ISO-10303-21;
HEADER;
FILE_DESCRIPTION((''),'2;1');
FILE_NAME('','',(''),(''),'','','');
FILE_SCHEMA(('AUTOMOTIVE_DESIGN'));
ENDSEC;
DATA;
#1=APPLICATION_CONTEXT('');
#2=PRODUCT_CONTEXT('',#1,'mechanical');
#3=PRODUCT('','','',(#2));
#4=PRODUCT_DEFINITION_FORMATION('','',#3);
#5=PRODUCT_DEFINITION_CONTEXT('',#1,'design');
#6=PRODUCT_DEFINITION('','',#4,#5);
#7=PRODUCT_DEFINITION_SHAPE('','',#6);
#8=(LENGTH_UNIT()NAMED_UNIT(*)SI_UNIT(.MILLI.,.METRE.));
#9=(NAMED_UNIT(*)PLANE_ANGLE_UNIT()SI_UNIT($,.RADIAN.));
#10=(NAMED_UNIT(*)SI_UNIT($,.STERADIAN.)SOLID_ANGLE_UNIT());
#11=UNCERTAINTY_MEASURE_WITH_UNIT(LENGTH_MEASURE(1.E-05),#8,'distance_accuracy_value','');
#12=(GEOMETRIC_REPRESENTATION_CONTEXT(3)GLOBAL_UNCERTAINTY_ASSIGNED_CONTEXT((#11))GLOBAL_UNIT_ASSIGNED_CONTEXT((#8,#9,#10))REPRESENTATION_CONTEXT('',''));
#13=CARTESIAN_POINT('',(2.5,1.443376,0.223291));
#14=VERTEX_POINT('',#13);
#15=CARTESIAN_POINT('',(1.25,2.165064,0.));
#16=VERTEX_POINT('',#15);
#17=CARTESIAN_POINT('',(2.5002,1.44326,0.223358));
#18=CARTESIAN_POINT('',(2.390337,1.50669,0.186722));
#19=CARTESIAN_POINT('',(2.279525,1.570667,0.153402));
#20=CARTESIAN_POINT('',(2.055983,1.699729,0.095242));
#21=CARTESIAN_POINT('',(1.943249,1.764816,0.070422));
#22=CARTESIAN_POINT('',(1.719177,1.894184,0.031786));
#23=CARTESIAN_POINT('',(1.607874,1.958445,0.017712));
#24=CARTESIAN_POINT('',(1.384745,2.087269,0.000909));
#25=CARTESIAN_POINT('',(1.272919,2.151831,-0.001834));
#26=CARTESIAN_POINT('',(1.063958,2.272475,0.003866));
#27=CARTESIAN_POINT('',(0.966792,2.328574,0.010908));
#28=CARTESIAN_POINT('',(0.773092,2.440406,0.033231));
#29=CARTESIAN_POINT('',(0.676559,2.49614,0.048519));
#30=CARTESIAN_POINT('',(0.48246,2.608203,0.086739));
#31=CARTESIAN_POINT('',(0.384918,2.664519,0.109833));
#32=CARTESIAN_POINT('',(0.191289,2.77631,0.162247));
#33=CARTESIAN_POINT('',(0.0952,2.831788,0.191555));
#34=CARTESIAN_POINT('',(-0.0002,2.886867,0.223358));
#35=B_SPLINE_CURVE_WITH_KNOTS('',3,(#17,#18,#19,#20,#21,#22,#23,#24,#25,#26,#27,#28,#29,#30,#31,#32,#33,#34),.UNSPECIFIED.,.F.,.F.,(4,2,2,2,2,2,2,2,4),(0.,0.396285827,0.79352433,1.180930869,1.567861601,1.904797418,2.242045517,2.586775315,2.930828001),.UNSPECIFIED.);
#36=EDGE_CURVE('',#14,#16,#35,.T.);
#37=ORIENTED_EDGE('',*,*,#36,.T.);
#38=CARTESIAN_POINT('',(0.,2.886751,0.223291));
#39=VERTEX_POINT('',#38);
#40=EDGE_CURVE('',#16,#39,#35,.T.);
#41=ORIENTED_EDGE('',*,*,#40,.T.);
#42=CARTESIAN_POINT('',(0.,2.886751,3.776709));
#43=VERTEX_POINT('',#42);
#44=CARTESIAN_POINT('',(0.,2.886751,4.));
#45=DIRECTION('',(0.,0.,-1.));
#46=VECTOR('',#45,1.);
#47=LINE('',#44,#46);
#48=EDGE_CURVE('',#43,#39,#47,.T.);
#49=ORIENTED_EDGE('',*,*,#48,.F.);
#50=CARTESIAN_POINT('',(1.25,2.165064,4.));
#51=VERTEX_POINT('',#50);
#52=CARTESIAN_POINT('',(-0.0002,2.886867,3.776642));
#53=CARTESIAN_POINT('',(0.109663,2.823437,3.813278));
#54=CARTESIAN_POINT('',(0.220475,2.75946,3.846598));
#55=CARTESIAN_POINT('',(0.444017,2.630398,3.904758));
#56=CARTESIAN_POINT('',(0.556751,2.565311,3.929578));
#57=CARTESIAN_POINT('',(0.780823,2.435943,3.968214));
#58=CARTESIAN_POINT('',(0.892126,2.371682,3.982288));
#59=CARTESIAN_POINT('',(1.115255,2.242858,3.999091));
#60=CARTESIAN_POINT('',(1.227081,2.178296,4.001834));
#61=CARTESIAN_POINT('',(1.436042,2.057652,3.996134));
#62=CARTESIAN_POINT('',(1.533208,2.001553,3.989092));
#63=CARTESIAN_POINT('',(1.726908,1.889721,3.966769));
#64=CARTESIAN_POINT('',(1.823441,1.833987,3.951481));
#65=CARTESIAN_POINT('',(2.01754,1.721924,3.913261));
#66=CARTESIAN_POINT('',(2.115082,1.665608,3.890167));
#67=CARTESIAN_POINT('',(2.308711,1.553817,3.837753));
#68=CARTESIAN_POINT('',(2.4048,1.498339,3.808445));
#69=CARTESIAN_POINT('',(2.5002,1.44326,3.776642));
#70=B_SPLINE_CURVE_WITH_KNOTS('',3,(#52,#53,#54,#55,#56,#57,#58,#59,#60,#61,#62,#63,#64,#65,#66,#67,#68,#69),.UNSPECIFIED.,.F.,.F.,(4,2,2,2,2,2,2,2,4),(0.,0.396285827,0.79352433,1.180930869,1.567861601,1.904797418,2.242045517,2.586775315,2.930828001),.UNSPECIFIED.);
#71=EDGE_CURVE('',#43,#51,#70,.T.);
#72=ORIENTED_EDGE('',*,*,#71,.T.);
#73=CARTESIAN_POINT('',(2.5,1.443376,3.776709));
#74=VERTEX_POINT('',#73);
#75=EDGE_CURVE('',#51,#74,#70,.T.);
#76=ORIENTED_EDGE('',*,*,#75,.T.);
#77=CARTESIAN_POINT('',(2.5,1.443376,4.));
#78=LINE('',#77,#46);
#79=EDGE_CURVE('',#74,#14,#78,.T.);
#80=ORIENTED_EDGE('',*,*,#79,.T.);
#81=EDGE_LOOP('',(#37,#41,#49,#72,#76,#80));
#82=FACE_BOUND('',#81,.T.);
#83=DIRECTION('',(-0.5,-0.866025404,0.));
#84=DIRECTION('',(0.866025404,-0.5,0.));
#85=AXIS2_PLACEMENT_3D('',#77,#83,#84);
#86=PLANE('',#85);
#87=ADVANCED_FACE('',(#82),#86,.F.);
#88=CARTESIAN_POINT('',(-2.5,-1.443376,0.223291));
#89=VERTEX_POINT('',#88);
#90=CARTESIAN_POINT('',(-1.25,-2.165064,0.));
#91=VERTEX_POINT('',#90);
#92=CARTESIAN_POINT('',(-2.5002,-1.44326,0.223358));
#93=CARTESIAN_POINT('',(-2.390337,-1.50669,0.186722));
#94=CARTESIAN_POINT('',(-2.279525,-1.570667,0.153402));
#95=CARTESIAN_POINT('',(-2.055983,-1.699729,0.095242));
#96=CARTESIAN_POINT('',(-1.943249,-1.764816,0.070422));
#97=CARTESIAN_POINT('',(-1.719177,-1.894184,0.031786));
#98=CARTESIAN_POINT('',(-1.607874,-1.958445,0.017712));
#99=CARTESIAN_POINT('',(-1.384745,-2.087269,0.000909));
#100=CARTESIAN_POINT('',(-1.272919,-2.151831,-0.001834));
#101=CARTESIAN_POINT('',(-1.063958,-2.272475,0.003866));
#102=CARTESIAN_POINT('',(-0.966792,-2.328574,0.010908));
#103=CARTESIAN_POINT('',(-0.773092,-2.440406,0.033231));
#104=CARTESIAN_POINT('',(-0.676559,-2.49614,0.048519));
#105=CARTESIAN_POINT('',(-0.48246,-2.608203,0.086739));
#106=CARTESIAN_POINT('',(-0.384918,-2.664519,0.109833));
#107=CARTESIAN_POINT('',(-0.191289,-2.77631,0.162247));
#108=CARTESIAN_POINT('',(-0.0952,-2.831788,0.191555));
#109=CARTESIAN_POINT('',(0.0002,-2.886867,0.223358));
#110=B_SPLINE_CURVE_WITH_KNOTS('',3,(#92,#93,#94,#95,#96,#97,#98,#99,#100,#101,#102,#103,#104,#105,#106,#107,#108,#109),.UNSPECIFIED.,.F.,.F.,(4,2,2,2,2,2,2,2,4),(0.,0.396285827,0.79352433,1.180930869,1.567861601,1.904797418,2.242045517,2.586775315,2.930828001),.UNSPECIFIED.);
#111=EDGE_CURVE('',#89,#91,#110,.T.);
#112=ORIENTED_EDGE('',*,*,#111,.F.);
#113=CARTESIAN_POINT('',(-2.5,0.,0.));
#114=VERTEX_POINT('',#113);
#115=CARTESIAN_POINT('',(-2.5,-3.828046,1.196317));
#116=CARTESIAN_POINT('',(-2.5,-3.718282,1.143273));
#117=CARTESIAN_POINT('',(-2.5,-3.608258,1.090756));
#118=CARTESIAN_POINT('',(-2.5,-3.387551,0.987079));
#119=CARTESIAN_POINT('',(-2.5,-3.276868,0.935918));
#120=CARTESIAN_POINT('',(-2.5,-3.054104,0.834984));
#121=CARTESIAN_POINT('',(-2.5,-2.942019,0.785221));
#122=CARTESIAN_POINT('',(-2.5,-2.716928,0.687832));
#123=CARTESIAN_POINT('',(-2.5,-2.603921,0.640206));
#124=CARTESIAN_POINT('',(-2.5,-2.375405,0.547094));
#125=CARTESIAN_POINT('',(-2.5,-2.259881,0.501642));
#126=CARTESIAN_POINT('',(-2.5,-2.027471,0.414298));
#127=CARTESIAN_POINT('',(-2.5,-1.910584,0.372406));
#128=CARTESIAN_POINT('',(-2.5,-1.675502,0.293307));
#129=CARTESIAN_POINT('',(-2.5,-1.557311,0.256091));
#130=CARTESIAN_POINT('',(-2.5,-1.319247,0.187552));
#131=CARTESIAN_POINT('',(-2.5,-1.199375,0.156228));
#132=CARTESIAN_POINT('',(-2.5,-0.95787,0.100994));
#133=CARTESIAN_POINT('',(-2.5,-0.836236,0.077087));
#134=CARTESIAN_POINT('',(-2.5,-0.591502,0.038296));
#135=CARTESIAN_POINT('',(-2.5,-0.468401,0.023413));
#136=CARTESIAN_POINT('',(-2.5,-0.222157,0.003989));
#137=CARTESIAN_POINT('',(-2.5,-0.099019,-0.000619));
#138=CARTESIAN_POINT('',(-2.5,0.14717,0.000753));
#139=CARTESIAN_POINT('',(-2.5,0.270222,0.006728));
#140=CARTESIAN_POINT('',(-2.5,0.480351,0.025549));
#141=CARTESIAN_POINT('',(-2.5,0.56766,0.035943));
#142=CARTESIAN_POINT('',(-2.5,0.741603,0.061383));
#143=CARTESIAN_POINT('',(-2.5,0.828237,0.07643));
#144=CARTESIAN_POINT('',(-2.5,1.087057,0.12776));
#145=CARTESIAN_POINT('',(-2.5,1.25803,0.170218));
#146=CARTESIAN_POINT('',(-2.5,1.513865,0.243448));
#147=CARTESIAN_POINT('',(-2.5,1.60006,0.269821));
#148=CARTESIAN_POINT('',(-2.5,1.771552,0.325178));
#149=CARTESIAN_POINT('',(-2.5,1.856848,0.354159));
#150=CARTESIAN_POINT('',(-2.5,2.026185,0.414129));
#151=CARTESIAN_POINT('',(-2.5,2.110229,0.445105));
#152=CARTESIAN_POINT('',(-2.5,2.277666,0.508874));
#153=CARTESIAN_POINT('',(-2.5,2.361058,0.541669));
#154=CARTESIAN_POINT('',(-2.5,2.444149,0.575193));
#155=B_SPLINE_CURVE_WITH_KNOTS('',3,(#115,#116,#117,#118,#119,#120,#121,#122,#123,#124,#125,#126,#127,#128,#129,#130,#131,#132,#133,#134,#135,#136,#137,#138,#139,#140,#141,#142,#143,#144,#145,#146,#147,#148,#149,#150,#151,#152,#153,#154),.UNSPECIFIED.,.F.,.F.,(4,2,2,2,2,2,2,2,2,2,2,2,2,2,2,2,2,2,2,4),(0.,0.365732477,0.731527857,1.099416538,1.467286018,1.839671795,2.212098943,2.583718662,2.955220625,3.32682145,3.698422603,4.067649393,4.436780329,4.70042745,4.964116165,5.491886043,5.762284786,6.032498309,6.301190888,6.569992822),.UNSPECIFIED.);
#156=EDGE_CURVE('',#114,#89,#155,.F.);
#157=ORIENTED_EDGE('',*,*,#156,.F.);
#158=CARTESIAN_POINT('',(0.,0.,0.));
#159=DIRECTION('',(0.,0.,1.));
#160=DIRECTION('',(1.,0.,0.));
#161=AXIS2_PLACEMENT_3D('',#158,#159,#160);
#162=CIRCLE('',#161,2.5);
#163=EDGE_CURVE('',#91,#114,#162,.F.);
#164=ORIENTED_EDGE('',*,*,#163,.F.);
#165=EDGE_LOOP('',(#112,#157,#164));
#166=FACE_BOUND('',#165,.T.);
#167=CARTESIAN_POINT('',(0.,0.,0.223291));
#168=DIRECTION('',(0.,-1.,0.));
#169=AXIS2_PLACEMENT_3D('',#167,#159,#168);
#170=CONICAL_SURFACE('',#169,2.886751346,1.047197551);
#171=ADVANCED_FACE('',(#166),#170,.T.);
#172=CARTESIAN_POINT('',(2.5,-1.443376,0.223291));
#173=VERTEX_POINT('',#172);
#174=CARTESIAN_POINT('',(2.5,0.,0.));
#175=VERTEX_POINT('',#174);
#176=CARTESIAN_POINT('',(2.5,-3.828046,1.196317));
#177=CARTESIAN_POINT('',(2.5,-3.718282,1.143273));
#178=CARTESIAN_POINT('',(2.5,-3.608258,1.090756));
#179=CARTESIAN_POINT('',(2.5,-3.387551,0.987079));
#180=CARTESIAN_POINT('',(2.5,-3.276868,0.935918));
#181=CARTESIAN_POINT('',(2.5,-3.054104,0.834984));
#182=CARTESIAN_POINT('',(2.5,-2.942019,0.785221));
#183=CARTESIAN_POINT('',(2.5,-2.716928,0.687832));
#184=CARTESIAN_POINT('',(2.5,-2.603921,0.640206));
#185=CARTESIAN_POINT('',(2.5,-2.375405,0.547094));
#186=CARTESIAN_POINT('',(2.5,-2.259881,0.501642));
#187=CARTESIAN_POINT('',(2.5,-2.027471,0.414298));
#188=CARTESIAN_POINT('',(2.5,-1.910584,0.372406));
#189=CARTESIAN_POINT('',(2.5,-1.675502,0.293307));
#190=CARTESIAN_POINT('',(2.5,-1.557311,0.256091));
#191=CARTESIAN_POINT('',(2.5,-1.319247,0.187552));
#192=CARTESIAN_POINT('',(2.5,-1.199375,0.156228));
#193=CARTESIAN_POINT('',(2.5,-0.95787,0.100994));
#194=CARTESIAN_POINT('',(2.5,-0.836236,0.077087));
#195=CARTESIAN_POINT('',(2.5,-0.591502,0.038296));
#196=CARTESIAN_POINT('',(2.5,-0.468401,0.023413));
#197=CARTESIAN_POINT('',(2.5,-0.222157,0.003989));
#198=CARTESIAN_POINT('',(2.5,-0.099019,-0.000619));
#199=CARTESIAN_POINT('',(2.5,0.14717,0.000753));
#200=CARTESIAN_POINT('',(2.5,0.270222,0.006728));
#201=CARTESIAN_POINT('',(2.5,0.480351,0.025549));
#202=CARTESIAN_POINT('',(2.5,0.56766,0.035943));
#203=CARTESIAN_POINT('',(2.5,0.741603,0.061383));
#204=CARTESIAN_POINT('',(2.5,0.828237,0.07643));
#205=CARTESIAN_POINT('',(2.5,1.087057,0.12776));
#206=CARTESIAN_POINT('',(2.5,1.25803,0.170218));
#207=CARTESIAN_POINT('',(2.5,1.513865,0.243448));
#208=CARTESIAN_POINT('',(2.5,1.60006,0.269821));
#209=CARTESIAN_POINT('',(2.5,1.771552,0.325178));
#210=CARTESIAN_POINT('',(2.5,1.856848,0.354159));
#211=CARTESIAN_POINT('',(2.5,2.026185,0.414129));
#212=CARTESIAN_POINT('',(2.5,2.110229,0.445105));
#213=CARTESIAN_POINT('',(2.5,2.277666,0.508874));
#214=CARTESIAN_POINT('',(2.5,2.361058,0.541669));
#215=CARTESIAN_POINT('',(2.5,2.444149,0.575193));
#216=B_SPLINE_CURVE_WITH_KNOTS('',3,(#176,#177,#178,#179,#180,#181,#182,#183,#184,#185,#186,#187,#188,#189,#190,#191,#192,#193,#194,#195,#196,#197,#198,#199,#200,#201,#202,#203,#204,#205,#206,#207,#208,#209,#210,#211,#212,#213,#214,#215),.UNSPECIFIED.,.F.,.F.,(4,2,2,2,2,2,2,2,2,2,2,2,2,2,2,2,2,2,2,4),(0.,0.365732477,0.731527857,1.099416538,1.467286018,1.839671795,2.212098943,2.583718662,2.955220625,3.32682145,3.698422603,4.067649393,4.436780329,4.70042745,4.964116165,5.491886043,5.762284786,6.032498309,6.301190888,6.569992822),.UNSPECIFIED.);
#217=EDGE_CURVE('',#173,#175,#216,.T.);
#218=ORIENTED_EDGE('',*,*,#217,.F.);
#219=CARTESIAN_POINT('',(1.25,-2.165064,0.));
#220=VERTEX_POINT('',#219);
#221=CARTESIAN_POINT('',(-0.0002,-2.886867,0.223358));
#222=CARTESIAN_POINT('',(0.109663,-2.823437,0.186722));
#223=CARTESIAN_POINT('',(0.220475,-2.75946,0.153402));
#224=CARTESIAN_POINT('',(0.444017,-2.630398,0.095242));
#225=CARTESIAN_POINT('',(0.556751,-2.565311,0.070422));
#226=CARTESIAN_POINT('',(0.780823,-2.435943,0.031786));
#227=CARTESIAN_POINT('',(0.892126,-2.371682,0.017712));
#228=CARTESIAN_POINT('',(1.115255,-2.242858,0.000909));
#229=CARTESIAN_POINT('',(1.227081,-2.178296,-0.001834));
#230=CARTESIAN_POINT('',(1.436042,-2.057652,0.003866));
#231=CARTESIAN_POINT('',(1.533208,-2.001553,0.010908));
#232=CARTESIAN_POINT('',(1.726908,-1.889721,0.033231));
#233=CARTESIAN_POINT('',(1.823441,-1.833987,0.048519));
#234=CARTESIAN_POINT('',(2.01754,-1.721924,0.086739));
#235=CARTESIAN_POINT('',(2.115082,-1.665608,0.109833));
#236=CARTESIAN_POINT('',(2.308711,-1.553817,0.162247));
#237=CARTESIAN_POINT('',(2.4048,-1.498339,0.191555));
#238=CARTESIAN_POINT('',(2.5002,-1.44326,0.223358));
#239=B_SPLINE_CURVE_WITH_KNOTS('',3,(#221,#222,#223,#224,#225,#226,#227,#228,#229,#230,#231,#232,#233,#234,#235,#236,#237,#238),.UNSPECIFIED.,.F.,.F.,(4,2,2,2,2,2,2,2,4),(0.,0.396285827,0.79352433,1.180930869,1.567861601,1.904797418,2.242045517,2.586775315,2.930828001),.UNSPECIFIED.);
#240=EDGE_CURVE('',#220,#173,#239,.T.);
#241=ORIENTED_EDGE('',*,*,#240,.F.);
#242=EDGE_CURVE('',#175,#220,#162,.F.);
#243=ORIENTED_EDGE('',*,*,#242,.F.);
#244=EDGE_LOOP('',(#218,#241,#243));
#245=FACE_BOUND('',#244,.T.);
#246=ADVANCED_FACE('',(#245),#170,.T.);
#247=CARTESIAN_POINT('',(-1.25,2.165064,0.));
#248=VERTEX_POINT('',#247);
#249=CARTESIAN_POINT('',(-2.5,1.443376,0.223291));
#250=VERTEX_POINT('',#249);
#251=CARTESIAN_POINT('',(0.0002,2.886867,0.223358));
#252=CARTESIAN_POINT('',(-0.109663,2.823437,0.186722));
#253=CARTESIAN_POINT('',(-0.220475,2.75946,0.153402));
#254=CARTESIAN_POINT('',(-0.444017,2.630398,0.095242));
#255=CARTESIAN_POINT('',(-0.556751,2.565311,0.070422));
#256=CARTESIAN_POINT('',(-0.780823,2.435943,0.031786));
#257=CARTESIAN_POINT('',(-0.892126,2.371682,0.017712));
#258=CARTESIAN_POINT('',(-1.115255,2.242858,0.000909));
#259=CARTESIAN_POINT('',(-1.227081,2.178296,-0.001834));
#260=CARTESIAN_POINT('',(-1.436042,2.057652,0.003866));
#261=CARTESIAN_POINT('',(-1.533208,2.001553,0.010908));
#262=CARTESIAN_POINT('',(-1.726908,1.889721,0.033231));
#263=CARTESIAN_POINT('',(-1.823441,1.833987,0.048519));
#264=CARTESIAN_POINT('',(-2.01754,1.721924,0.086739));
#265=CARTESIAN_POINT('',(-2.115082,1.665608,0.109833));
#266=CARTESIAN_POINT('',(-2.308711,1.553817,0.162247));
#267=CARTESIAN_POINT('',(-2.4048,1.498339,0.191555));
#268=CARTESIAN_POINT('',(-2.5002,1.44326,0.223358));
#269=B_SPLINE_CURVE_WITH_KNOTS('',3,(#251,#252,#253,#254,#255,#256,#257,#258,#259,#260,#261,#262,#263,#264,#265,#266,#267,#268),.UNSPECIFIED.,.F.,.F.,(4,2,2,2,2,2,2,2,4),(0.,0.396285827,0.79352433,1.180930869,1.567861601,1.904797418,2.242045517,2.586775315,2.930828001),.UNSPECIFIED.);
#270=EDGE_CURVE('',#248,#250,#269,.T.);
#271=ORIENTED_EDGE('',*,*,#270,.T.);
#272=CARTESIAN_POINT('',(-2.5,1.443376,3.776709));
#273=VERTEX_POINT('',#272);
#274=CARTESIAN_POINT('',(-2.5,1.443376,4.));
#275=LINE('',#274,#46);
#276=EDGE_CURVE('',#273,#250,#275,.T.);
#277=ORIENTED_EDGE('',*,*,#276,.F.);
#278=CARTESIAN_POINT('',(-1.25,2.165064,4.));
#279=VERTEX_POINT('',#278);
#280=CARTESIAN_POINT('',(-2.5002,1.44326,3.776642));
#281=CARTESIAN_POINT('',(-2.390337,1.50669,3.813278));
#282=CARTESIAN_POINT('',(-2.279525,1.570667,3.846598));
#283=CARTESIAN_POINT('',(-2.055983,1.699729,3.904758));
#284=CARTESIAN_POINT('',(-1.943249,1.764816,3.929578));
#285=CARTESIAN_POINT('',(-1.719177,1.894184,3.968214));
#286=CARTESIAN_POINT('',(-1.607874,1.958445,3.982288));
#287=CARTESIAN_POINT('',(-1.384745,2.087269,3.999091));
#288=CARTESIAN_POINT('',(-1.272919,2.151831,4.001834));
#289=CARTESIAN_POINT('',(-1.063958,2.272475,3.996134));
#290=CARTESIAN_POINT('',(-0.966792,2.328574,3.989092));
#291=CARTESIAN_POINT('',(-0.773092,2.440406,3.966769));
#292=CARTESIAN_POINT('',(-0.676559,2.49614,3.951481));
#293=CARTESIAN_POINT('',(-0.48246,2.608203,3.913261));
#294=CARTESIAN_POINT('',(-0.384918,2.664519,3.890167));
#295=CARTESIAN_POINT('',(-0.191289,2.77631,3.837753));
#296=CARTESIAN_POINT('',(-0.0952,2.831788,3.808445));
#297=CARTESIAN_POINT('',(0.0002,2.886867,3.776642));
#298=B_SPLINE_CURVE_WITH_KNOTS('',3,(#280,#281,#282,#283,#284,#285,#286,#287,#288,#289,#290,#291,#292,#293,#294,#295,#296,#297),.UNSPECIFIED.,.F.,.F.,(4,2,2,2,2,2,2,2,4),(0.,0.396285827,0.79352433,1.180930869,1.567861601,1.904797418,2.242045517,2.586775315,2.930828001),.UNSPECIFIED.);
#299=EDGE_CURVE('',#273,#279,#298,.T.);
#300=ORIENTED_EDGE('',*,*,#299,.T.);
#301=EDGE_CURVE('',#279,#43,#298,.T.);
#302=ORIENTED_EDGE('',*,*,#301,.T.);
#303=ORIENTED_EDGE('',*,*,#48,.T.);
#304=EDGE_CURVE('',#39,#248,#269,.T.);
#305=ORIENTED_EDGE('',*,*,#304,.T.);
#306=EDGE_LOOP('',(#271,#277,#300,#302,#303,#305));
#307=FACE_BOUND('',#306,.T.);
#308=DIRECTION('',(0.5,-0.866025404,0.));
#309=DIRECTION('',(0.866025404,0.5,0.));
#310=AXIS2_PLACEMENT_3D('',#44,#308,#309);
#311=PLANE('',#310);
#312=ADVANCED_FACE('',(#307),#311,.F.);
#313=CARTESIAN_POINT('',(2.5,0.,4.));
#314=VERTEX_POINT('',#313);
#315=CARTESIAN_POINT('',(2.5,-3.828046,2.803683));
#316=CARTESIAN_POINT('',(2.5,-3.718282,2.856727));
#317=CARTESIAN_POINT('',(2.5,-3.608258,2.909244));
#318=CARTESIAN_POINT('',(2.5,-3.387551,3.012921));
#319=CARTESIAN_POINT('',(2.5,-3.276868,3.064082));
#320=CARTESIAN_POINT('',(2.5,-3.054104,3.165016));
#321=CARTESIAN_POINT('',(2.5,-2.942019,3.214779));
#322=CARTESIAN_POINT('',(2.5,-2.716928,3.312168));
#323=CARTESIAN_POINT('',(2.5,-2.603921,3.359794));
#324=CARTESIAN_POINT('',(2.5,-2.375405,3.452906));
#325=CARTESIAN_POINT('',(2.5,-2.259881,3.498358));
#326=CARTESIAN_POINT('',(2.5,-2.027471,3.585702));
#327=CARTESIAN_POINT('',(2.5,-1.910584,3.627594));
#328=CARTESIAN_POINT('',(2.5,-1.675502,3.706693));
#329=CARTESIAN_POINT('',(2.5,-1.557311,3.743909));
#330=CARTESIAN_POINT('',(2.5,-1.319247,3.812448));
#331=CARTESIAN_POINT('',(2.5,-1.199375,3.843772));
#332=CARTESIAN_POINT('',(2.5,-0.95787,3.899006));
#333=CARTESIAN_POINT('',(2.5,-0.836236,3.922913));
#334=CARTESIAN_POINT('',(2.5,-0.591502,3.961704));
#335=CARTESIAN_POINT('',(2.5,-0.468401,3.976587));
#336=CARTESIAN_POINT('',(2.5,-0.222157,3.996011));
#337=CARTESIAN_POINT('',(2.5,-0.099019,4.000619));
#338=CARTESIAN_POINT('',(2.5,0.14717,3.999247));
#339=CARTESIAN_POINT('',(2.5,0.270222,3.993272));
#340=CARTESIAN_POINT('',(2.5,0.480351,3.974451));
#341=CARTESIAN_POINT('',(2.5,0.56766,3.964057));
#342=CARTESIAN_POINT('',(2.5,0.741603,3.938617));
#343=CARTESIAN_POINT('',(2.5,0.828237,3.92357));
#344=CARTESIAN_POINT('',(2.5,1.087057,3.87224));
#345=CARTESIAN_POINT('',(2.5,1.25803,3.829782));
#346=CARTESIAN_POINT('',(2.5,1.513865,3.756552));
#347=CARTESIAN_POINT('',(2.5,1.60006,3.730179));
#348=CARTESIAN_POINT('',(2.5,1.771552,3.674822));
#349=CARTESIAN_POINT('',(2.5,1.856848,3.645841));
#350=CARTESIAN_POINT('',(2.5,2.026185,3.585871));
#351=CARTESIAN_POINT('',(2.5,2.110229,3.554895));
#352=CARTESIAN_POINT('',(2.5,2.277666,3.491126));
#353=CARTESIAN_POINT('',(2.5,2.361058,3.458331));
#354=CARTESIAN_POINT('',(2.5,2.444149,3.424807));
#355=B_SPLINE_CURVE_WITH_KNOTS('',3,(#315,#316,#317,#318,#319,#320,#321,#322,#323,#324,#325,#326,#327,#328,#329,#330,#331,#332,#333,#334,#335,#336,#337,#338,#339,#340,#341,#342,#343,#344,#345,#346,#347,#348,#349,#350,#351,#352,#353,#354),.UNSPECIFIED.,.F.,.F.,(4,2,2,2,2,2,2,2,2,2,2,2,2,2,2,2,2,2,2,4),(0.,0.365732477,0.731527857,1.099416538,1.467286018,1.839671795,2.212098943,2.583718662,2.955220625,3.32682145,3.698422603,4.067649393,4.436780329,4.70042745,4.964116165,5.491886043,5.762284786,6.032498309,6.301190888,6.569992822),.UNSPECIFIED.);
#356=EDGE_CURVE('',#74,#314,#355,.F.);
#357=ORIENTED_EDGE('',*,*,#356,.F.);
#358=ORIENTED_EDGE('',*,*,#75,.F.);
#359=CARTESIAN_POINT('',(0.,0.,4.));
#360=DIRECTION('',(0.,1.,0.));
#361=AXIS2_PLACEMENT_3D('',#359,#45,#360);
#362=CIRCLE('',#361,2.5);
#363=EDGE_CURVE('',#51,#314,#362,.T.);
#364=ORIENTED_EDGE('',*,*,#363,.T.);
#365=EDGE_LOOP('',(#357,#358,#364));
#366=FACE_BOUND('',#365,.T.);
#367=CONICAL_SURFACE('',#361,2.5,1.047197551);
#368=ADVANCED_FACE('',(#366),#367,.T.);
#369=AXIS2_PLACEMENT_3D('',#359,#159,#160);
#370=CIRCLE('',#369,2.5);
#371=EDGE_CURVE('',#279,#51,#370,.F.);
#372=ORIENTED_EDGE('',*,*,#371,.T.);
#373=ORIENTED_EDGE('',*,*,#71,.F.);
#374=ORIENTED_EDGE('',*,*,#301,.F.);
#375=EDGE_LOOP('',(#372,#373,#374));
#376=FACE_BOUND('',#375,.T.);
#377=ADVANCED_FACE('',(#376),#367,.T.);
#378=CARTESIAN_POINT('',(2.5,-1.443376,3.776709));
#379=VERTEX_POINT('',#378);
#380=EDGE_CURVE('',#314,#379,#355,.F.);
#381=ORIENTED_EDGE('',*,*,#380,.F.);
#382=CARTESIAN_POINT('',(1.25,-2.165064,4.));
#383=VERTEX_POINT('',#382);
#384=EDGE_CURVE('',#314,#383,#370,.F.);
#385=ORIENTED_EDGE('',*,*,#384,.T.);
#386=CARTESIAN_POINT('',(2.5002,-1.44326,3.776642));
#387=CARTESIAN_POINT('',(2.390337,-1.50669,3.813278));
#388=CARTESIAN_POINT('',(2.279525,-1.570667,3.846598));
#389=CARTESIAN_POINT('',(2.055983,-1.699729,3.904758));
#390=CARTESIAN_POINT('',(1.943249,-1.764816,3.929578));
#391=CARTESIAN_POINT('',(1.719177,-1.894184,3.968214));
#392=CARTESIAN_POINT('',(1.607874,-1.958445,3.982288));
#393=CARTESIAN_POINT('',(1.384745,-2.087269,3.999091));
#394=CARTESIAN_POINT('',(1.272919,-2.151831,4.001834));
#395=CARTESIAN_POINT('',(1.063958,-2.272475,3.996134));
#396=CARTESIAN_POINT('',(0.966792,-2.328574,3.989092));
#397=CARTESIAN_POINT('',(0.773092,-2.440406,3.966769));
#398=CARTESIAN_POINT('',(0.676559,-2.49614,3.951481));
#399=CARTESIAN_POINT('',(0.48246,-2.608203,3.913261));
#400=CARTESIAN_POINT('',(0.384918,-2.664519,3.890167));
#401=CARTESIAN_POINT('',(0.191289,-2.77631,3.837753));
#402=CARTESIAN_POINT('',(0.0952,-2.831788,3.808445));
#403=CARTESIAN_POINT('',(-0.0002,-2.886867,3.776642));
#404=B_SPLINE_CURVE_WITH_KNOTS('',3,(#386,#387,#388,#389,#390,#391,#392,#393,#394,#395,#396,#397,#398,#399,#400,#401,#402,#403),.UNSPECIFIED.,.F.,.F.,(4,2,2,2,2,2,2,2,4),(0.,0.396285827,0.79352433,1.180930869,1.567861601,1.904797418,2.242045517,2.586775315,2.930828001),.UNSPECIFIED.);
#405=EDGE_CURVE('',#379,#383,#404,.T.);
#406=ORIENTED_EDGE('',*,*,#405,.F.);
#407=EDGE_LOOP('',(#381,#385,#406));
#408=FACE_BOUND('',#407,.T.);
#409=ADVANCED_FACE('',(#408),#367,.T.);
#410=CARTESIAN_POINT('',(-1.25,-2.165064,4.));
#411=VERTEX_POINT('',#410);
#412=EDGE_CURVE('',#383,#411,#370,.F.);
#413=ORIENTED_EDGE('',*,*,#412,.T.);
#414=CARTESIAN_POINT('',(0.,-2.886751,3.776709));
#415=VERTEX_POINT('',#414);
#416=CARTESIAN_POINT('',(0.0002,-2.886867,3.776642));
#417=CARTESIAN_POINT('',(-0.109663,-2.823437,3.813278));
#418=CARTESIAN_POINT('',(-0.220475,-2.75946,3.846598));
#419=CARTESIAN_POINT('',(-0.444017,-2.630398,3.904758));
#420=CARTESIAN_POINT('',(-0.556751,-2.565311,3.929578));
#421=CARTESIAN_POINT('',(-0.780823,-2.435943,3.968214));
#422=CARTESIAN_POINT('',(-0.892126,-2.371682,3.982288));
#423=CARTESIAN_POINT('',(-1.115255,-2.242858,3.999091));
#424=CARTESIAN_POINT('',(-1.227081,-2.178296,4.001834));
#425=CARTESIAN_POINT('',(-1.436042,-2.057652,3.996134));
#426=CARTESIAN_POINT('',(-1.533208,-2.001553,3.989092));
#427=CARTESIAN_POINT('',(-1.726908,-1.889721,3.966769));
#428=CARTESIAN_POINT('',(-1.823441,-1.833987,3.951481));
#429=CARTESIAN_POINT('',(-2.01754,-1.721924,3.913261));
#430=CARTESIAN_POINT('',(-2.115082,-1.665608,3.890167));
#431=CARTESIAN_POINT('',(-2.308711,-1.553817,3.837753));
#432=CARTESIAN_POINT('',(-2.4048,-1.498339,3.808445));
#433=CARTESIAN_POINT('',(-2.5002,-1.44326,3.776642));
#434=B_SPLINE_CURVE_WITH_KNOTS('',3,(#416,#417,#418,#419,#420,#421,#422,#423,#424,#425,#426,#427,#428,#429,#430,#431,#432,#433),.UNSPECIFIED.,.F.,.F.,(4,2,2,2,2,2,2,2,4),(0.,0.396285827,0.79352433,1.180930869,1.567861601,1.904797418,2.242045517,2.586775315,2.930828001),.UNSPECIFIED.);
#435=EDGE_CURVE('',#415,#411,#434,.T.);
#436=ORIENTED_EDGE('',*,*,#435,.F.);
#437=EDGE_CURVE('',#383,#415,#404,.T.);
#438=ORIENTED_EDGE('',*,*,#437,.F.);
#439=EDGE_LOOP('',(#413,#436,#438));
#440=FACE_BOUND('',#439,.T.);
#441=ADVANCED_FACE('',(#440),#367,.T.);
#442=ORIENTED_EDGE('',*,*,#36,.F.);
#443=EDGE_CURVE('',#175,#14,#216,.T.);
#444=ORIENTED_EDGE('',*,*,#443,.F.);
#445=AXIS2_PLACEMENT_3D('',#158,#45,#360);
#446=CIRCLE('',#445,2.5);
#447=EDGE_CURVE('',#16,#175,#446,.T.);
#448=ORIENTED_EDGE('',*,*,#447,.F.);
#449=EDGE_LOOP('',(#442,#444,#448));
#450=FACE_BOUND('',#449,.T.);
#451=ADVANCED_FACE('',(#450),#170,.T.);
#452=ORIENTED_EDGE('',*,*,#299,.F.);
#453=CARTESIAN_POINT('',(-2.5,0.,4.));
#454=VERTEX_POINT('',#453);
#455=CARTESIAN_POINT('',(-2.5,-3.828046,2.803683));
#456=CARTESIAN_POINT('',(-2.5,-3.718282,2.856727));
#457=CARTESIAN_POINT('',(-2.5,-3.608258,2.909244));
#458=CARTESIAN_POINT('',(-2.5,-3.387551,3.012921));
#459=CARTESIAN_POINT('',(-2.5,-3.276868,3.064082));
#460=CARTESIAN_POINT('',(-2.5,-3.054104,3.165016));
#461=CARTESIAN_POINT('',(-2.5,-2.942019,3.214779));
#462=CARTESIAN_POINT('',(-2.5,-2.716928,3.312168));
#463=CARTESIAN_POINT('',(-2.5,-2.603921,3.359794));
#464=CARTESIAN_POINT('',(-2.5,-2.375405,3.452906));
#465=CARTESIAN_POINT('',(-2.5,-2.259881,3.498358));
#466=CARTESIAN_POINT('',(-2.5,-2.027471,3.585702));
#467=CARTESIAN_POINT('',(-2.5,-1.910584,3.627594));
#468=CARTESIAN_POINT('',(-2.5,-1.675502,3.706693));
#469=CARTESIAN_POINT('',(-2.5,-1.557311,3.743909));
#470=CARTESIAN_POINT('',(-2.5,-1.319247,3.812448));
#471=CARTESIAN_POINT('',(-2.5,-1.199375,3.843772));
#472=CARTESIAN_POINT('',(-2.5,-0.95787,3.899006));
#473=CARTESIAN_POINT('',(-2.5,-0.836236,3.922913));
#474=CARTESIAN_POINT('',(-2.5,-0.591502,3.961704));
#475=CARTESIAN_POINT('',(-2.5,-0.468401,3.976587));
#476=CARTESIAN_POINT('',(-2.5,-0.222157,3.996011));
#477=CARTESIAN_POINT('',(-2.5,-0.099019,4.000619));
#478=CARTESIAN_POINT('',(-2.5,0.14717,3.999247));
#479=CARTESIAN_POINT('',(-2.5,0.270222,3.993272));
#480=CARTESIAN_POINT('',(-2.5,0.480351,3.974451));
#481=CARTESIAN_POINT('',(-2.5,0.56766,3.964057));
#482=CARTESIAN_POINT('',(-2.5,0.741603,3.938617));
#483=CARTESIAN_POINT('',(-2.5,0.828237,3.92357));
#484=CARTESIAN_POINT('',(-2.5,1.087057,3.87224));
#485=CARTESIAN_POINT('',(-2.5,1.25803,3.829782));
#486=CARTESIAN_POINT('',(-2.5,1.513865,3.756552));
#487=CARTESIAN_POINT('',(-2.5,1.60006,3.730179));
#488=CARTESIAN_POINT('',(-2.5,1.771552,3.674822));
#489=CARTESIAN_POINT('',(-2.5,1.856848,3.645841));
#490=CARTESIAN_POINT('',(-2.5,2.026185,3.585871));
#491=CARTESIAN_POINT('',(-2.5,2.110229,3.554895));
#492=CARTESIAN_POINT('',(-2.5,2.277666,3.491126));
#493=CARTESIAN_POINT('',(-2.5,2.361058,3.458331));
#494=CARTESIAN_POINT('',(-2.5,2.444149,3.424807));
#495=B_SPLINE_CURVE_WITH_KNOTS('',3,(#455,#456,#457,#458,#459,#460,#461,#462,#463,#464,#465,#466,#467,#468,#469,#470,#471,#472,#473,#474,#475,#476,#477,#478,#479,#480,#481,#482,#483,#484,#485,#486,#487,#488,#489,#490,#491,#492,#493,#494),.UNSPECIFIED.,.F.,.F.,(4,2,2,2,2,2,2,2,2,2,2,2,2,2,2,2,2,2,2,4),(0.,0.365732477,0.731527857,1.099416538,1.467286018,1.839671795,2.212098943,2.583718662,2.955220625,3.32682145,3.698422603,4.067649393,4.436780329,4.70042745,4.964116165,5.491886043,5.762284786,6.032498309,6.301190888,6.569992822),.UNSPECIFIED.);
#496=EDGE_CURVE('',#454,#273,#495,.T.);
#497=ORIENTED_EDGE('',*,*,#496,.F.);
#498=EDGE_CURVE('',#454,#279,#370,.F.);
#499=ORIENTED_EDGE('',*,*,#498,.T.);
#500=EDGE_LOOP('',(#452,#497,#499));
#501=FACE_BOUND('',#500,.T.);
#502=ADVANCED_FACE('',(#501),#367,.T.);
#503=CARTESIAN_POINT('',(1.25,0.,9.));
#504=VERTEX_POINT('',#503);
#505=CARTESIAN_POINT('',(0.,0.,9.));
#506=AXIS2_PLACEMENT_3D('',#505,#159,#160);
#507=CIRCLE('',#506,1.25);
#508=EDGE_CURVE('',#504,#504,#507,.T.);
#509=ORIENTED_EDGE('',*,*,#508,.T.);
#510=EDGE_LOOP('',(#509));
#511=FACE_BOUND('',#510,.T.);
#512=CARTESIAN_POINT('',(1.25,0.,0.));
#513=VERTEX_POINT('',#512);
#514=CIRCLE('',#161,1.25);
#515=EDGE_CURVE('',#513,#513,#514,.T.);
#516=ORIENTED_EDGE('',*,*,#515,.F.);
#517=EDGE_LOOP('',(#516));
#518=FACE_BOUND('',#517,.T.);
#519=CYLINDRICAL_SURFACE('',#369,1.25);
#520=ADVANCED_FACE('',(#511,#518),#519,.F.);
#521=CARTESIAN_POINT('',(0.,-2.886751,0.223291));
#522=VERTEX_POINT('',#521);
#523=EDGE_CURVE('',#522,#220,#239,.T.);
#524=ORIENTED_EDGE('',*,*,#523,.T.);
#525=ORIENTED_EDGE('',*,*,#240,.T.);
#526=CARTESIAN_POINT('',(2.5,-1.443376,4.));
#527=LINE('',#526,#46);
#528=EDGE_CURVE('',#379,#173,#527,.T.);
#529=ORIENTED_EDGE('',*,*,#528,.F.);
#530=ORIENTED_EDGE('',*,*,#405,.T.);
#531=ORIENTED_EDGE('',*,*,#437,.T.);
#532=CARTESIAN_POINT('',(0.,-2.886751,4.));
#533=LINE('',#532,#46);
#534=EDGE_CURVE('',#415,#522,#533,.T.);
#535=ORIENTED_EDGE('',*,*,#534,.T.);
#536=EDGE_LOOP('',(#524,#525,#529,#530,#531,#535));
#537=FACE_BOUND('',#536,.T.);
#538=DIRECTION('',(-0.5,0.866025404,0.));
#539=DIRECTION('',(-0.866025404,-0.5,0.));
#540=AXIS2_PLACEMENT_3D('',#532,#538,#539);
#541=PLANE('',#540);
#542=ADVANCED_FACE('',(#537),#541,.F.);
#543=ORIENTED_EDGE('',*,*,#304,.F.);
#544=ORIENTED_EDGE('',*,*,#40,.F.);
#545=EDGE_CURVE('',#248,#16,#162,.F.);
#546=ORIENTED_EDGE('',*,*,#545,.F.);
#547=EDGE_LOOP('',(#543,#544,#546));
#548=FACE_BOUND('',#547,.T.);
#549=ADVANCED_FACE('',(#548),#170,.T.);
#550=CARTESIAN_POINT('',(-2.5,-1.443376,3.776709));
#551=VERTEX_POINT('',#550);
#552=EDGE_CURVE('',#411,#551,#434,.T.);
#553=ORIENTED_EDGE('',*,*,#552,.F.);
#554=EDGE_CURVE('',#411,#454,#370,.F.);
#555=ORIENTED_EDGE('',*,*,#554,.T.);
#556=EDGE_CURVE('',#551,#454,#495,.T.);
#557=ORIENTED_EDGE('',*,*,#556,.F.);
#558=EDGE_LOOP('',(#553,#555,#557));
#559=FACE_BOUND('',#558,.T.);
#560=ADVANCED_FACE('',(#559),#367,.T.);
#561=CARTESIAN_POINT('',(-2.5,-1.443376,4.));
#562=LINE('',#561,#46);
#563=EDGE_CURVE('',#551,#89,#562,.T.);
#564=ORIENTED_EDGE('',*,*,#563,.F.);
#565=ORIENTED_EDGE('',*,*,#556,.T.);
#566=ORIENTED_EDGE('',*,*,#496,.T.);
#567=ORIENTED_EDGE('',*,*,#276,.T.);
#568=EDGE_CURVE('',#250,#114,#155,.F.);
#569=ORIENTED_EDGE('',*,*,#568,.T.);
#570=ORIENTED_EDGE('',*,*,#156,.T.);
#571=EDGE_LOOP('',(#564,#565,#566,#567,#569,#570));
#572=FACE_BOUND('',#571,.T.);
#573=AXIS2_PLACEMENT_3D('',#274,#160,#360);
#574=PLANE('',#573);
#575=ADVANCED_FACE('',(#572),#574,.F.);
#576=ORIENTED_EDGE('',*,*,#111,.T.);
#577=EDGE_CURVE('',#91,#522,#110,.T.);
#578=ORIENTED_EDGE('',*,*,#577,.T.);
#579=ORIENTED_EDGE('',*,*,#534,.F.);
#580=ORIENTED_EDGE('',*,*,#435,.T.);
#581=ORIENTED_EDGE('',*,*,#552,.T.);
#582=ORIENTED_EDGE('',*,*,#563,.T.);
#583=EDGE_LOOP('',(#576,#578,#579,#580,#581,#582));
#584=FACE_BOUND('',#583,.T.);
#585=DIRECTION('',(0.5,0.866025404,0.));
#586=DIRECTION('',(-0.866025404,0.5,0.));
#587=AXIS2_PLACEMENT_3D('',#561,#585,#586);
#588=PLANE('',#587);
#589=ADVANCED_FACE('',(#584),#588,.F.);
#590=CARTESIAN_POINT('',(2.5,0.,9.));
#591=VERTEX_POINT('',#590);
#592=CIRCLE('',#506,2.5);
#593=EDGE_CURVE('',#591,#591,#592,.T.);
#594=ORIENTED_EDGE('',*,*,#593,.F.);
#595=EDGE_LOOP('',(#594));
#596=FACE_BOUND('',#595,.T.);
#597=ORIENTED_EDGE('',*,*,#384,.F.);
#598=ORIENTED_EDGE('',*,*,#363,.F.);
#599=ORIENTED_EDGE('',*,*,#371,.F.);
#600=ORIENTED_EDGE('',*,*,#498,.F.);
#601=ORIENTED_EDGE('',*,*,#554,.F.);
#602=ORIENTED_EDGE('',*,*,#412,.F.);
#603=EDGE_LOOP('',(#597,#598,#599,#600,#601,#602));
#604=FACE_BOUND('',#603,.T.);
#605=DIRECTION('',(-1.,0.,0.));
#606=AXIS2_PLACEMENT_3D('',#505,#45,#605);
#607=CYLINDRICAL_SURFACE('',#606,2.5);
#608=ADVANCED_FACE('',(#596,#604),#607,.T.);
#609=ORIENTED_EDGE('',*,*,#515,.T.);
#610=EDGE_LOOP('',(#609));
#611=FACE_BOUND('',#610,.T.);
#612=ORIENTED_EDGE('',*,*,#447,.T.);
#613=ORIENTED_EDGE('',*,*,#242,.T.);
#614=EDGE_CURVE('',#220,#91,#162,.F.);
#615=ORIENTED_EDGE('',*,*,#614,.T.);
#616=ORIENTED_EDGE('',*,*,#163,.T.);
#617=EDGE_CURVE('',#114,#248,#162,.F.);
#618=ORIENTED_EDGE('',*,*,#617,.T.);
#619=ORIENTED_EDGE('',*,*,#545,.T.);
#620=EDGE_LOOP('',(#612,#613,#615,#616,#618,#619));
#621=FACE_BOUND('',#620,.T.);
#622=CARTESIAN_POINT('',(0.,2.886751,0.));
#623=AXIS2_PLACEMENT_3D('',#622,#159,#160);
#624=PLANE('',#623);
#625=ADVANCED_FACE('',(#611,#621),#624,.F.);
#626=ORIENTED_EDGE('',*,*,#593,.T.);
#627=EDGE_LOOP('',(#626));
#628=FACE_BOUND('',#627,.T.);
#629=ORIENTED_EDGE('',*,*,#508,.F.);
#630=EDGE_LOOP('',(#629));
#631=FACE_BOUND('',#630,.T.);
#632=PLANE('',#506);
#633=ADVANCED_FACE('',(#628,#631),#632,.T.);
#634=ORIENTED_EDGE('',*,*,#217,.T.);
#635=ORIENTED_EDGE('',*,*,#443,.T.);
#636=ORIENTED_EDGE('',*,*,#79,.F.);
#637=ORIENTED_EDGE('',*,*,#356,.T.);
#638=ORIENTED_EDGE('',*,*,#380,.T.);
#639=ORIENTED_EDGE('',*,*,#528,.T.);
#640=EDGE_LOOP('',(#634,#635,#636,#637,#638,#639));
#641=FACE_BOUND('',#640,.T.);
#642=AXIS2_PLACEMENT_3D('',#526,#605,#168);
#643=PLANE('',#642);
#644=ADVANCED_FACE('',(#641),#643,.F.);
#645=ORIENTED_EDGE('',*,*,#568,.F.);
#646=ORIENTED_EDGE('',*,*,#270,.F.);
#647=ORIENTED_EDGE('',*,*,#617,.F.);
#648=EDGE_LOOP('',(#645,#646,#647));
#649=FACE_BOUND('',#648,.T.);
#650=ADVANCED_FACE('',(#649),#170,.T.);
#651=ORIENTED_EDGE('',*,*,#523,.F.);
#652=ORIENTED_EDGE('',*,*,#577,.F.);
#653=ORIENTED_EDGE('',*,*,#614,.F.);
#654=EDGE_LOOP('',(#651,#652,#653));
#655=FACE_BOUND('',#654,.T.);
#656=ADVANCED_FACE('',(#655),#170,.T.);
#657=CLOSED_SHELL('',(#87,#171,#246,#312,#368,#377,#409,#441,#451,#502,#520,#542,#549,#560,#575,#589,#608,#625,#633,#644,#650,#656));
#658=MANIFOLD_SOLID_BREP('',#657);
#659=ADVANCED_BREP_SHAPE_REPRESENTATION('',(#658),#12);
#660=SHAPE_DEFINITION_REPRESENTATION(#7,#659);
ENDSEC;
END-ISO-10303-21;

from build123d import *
from build123d.topology import SkipClean

# Parameters (mm, degrees)
BOSS_EXTRUDE1_DEPTH       = 4
M3X0_5_TAPPED_HOLE1_D     = 2.5
M3X0_5_TAPPED_HOLE1_DEPTH = 7.5
M3X0_5_TAPPED_HOLE1_TIP   = 0.751075774
SKETCH5_R                 = 1.25
BOSS_EXTRUDE2_DEPTH       = 5


with BuildPart() as part:
    # Sketch1 → Boss-Extrude1 (new body)
    with BuildSketch(Plane.XY):
        Polygon((0, 2.886751346), (-2.5, 1.443375673), (-2.5, -1.443375673), (0, -2.886751346), (2.5, -1.443375673), (2.5, 1.443375673), align=None)
    extrude(amount=BOSS_EXTRUDE1_DEPTH)

    # M3x0.5 Tapped Hole1
    with Locations(Plane.XY.offset(4)):
        with Locations((0, 0)):
            Hole(M3X0_5_TAPPED_HOLE1_D / 2, depth=M3X0_5_TAPPED_HOLE1_DEPTH)
            with Locations((0, 0, -(M3X0_5_TAPPED_HOLE1_DEPTH + M3X0_5_TAPPED_HOLE1_TIP / 2))):  # 118° drill point
                Cone(0, M3X0_5_TAPPED_HOLE1_D / 2, M3X0_5_TAPPED_HOLE1_TIP, mode=Mode.SUBTRACT)

    # Sketch4 → Cut-Revolve1 (revolve, cut)
    with BuildSketch(Plane(origin=(0, 0, 0), x_dir=(0, 0, -1), z_dir=(1, 0, 0))):
        Polygon((-3.776709006, 2.886751346), (-4, 2.5), (-4, 2.886751346), align=None)
        Polygon((0, 2.886751346), (-0.223290994, 2.886751346), (0, 2.5), align=None)
    revolve(axis=Axis((0, 0, 0), (0, 0, 1)), mode=Mode.SUBTRACT)

    # Sketch5 → Boss-Extrude2 (add)
    with SkipClean():  # the faces are left unmerged after this step: merging them gives an invalid solid
        with BuildSketch(Plane.XY.offset(4)):
            with BuildLine():
                ThreePointArc((1.25, -2.165063509), (2.165063509, -1.25), (2.5, 0))
                ThreePointArc((2.5, 0), (2.165063509, 1.25), (1.25, 2.165063509))
                ThreePointArc((1.25, 2.165063509), (0, 2.5), (-1.25, 2.165063509))
                ThreePointArc((-1.25, 2.165063509), (-2.165063509, 1.25), (-2.5, 0))
                ThreePointArc((-2.5, 0), (-2.165063509, -1.25), (-1.25, -2.165063509))
                ThreePointArc((-1.25, -2.165063509), (0, -2.5), (1.25, -2.165063509))
            make_face()
            Circle(SKETCH5_R, mode=Mode.SUBTRACT)
        extrude(amount=BOSS_EXTRUDE2_DEPTH)
    add(part.part.scale(1), mode=Mode.REPLACE)  # the faces are merged on a copy


solid = part.part
